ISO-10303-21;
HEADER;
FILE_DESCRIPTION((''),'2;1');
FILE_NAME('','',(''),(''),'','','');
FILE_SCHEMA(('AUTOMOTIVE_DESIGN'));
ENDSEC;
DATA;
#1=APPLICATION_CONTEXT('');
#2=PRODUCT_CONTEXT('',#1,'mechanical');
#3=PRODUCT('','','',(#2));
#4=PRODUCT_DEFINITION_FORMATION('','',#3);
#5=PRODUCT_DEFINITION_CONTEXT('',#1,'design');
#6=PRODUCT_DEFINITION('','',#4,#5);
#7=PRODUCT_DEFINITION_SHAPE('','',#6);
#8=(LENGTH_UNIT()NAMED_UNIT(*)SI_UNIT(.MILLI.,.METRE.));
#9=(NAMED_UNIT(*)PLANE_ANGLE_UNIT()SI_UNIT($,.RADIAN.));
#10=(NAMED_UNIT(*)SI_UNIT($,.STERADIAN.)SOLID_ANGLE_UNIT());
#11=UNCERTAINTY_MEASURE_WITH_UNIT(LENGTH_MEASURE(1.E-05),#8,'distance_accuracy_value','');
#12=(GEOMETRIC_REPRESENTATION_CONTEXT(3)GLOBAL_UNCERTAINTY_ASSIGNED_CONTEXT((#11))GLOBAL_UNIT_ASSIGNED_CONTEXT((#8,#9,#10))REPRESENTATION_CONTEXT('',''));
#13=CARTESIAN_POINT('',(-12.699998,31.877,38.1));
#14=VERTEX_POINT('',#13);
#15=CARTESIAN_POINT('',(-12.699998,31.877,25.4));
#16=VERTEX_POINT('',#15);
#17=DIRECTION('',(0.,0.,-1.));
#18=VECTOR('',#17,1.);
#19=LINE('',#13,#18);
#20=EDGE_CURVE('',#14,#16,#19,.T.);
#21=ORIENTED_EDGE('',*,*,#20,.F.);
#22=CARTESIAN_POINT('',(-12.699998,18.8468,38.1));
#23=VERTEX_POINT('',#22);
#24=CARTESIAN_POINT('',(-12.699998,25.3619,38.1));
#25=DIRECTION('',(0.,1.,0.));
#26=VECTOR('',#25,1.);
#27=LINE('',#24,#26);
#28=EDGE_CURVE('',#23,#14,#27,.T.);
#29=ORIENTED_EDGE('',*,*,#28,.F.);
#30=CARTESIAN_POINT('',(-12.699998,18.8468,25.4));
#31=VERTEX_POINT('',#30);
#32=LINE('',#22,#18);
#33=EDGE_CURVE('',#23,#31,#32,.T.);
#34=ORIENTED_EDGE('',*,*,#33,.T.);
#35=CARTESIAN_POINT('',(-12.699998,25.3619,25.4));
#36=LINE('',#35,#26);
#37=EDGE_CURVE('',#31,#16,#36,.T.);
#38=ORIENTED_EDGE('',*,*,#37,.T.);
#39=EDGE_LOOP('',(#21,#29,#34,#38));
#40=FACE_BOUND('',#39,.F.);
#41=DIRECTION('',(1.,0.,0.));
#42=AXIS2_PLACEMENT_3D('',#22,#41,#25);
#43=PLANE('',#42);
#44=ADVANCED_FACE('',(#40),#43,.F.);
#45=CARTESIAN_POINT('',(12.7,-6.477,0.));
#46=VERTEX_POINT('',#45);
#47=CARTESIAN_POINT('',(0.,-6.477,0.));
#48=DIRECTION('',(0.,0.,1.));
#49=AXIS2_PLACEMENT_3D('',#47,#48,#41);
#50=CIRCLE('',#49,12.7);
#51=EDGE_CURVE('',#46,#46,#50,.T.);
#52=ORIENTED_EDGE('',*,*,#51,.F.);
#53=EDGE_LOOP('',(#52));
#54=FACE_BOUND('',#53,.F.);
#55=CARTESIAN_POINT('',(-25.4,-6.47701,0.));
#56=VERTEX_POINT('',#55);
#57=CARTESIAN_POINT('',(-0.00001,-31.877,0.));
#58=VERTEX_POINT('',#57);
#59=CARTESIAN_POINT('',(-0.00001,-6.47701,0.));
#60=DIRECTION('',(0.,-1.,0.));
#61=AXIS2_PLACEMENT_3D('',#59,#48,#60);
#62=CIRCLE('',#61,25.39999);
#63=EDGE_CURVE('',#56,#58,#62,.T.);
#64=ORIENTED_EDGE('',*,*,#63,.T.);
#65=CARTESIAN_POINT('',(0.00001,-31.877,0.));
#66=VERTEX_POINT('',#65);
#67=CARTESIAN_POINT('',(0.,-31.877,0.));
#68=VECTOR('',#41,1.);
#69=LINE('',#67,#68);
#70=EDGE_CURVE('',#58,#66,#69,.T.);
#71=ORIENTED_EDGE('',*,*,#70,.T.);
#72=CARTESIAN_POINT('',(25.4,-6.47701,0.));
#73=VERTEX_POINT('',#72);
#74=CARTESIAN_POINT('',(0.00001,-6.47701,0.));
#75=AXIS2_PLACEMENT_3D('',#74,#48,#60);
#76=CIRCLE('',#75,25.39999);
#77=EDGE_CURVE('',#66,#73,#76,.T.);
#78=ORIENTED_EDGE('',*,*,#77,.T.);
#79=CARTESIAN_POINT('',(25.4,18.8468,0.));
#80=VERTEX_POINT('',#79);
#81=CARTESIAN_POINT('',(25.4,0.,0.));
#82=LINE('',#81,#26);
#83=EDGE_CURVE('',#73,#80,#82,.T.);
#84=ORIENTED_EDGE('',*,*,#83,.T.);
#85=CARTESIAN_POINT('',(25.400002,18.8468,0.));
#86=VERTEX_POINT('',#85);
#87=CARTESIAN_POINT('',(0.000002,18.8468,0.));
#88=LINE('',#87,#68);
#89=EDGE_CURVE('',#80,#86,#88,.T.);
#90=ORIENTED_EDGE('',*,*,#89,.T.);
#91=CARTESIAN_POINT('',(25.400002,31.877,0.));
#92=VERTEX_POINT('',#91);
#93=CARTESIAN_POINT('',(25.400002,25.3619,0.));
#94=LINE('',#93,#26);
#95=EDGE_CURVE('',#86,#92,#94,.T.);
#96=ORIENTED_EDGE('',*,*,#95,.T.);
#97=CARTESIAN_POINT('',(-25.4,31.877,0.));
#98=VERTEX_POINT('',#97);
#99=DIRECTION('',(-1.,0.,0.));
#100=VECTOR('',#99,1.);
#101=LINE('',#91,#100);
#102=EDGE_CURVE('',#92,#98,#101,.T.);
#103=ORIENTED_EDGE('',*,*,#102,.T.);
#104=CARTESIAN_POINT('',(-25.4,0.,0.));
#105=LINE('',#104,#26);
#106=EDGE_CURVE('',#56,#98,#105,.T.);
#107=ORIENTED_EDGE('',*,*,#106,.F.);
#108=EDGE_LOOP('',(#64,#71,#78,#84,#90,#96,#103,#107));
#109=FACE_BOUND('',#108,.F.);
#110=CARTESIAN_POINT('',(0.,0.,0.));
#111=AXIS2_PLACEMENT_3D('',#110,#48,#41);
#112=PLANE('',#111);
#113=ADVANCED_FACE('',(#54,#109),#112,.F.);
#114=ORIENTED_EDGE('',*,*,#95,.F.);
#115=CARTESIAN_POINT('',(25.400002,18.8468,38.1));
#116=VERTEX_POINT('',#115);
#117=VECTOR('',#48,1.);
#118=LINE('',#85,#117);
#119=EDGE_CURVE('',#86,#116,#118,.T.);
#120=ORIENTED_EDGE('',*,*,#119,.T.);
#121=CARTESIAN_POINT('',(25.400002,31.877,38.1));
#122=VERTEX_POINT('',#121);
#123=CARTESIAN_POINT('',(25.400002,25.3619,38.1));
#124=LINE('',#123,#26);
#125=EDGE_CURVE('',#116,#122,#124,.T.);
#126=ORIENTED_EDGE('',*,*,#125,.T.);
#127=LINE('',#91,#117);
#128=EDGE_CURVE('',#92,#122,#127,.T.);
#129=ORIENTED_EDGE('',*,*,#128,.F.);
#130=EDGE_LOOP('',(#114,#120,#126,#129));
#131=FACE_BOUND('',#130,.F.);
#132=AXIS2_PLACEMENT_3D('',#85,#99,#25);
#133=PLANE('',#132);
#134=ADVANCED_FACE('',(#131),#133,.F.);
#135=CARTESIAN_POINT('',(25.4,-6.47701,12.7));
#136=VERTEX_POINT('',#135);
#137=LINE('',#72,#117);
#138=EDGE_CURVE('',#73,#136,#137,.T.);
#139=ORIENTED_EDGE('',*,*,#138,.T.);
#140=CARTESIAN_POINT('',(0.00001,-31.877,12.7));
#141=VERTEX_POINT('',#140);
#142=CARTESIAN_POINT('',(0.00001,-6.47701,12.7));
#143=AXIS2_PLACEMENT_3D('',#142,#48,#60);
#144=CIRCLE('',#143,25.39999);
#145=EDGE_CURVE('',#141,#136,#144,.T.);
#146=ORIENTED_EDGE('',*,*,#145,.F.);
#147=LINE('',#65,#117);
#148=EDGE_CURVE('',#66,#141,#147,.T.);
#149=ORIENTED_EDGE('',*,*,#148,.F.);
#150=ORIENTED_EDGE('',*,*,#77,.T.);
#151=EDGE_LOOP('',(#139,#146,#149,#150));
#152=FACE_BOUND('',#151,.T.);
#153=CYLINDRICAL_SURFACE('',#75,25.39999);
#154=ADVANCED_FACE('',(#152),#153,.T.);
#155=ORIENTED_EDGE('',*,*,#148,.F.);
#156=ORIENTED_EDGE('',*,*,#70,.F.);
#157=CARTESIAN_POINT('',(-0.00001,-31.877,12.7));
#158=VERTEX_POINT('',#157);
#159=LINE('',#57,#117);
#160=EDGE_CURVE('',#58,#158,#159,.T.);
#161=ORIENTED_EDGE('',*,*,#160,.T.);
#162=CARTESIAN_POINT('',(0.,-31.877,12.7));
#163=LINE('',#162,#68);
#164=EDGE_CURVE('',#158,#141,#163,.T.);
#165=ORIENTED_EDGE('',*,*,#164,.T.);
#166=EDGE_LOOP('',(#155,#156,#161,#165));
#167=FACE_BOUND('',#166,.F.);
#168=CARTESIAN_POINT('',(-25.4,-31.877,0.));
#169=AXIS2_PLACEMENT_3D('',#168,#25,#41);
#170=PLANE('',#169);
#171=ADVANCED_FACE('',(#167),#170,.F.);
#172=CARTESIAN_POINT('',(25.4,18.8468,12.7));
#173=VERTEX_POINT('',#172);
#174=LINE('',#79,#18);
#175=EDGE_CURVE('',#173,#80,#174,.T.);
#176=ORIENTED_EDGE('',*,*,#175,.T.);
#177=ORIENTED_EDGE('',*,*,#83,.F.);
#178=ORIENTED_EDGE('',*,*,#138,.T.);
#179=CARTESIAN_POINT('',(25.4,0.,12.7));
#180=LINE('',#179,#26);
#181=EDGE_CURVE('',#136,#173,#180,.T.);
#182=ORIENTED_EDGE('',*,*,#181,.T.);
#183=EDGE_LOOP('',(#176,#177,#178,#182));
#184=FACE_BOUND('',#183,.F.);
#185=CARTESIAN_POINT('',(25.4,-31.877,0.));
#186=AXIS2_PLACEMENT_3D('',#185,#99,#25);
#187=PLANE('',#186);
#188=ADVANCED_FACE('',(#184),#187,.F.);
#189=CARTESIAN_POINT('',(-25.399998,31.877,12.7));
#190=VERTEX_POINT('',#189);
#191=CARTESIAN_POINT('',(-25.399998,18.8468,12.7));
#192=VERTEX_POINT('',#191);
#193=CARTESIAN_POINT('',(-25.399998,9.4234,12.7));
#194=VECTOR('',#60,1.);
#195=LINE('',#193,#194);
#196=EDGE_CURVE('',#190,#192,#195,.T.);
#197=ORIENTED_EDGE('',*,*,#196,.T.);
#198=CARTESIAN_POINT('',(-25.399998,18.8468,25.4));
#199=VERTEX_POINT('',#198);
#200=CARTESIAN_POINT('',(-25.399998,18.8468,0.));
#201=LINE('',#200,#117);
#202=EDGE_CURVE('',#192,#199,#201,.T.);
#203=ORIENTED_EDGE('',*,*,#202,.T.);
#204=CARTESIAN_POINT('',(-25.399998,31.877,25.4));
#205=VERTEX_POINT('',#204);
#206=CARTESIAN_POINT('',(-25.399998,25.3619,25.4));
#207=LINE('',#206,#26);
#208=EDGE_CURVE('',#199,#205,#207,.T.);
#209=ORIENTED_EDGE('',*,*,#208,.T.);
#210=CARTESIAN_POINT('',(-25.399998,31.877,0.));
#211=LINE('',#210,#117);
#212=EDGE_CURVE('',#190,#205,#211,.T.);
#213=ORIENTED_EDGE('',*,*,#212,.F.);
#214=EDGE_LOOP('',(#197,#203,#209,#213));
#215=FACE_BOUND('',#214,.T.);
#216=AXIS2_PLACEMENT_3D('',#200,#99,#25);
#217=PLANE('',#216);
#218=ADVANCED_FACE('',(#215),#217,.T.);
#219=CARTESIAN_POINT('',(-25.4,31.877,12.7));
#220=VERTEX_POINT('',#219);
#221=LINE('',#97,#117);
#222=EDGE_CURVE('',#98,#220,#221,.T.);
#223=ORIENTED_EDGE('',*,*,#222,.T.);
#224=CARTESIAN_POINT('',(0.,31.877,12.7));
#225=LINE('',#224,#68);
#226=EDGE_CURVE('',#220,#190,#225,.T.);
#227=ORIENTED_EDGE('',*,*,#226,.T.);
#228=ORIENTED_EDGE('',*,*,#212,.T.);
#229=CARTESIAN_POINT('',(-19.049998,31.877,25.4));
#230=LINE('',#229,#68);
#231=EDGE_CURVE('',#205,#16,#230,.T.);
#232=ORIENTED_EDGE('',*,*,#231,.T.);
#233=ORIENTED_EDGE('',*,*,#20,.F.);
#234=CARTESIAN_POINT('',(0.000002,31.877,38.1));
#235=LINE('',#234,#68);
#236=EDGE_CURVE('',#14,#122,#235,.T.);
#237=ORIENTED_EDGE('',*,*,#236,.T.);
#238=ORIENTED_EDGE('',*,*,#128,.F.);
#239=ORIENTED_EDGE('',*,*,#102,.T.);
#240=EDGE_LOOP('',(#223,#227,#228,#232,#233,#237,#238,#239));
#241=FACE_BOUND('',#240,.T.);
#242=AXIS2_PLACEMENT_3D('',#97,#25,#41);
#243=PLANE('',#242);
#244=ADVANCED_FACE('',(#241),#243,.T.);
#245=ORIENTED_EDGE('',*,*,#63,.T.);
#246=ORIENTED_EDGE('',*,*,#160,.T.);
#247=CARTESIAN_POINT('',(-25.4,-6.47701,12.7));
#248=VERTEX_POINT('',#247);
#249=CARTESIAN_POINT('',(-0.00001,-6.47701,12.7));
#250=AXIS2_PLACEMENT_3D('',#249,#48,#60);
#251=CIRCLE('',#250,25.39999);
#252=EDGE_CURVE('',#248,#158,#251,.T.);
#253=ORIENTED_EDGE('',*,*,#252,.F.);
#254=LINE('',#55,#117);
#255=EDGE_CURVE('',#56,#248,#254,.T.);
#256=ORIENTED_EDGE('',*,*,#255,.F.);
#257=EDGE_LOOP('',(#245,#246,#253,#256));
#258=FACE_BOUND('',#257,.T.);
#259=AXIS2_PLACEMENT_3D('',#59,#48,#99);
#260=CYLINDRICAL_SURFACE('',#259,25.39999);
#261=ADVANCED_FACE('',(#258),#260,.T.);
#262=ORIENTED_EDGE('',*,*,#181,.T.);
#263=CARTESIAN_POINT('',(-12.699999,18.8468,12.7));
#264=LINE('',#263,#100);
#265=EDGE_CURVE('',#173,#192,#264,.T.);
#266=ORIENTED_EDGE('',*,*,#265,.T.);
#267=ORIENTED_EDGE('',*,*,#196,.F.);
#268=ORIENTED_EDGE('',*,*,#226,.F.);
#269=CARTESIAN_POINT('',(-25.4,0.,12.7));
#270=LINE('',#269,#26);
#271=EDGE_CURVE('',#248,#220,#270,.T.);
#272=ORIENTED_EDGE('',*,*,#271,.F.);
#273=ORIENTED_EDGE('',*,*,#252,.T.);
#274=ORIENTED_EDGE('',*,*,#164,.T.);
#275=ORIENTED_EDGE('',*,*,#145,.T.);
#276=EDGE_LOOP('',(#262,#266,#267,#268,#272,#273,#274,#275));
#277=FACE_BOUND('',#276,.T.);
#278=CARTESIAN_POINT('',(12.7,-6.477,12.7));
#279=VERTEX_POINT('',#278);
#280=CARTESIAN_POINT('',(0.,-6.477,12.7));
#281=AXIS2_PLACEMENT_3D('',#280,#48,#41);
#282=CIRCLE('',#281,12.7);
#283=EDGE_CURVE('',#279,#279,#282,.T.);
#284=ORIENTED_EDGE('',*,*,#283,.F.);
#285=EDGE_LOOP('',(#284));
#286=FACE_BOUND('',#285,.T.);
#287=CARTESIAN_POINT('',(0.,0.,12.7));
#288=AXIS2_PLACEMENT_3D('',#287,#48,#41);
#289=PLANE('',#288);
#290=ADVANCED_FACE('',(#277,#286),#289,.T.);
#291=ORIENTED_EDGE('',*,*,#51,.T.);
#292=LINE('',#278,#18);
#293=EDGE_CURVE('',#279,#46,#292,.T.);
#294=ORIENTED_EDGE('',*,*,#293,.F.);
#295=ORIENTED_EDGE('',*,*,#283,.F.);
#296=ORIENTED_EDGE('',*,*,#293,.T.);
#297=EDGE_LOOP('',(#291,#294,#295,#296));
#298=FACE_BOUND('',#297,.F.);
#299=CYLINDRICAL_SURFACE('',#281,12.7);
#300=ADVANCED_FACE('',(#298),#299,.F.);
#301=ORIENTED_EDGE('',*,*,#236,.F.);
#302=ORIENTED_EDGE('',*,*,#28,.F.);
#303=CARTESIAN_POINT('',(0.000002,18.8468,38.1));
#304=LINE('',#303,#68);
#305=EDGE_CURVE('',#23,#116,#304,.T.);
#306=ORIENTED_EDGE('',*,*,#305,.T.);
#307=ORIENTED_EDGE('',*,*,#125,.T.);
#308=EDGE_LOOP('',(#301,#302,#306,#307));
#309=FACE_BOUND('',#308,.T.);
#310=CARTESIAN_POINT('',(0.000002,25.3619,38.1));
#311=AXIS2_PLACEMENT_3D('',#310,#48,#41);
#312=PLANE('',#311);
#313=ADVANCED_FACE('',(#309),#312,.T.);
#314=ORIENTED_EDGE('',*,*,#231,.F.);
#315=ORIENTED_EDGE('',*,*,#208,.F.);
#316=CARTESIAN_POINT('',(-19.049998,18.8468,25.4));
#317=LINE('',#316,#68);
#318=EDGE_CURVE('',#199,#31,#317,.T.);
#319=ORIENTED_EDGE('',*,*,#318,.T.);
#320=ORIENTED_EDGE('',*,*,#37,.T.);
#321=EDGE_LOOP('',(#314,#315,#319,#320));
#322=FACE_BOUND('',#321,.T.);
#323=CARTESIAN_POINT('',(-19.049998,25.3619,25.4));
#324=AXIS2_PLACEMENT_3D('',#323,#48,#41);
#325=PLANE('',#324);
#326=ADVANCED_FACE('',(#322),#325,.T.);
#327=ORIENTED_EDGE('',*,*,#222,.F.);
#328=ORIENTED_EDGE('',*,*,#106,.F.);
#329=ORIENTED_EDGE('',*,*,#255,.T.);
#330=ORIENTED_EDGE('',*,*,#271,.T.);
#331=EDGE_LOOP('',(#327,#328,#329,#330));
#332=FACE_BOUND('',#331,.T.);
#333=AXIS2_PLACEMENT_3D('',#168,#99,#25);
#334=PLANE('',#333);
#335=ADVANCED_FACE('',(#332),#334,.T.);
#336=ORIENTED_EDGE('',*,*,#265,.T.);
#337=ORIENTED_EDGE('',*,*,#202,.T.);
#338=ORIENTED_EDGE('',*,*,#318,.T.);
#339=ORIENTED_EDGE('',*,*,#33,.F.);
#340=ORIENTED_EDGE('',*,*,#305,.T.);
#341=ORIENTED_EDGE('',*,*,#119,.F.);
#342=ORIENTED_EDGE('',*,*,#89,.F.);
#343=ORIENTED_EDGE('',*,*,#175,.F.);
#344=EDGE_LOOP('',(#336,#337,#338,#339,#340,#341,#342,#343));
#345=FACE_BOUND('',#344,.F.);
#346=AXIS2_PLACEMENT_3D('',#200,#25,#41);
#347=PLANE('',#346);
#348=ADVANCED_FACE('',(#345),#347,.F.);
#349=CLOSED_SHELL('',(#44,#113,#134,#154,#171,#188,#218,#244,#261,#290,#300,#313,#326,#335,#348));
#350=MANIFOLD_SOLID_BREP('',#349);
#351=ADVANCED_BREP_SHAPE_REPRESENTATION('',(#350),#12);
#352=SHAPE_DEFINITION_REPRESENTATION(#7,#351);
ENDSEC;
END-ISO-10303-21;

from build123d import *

# Parameters (mm, degrees)
F0_W     = 50.8
F0_H     = 63.754
F1_DEPTH = 12.7
F2_W     = 50.8
F2_H     = 13.0302
F3_DEPTH = 38.1
F4_W     = 12.7
F4_H     = 13.0302
F5_DEPTH = 12.7
F6_R     = 25.39999
F7_R     = 12.7
F8_DEPTH = 12.701


# Not quite as in the source:
# - a fillet or chamfer is up to 0.001 mm smaller than in the source, because OpenCascade refuses the exact size


with BuildPart() as f1:
    # F0 (on Top) → F1 (new body)
    with BuildSketch(Plane.XY):
        Rectangle(F0_W, F0_H)
    extrude(amount=F1_DEPTH)

    # F2 (on Top) → F3 (join)
    with BuildSketch(Plane.XY):
        with Locations((1.8626e-06, 25.3619)):
            Rectangle(F2_W, F2_H)
    extrude(amount=F3_DEPTH)

    # F4 (on face) → F5 (cut)
    with BuildSketch(Plane.XY.offset(38.1)):
        with Locations((-19.0499981374, 25.3619)):
            Rectangle(F4_W, F4_H)
    extrude(amount=-F5_DEPTH, mode=Mode.SUBTRACT)

    # F6 (radius 25.4 in the source; OpenCascade refuses exactly that, so slightly less here)
    f6_edges = [f1.edges().sort_by_distance(p)[0] for p in [
        (-25.4, -31.877, 6.35),
        (25.4, -31.877, 6.35),
    ]]
    fillet(f6_edges, radius=F6_R)

    # F7 (on face) → F8 (cut, through all)
    with BuildSketch(Plane.XY.offset(12.7)):
        with Locations((0, -6.477)):
            Circle(F7_R)
    extrude(amount=-F8_DEPTH, mode=Mode.SUBTRACT)


solid = f1.part
